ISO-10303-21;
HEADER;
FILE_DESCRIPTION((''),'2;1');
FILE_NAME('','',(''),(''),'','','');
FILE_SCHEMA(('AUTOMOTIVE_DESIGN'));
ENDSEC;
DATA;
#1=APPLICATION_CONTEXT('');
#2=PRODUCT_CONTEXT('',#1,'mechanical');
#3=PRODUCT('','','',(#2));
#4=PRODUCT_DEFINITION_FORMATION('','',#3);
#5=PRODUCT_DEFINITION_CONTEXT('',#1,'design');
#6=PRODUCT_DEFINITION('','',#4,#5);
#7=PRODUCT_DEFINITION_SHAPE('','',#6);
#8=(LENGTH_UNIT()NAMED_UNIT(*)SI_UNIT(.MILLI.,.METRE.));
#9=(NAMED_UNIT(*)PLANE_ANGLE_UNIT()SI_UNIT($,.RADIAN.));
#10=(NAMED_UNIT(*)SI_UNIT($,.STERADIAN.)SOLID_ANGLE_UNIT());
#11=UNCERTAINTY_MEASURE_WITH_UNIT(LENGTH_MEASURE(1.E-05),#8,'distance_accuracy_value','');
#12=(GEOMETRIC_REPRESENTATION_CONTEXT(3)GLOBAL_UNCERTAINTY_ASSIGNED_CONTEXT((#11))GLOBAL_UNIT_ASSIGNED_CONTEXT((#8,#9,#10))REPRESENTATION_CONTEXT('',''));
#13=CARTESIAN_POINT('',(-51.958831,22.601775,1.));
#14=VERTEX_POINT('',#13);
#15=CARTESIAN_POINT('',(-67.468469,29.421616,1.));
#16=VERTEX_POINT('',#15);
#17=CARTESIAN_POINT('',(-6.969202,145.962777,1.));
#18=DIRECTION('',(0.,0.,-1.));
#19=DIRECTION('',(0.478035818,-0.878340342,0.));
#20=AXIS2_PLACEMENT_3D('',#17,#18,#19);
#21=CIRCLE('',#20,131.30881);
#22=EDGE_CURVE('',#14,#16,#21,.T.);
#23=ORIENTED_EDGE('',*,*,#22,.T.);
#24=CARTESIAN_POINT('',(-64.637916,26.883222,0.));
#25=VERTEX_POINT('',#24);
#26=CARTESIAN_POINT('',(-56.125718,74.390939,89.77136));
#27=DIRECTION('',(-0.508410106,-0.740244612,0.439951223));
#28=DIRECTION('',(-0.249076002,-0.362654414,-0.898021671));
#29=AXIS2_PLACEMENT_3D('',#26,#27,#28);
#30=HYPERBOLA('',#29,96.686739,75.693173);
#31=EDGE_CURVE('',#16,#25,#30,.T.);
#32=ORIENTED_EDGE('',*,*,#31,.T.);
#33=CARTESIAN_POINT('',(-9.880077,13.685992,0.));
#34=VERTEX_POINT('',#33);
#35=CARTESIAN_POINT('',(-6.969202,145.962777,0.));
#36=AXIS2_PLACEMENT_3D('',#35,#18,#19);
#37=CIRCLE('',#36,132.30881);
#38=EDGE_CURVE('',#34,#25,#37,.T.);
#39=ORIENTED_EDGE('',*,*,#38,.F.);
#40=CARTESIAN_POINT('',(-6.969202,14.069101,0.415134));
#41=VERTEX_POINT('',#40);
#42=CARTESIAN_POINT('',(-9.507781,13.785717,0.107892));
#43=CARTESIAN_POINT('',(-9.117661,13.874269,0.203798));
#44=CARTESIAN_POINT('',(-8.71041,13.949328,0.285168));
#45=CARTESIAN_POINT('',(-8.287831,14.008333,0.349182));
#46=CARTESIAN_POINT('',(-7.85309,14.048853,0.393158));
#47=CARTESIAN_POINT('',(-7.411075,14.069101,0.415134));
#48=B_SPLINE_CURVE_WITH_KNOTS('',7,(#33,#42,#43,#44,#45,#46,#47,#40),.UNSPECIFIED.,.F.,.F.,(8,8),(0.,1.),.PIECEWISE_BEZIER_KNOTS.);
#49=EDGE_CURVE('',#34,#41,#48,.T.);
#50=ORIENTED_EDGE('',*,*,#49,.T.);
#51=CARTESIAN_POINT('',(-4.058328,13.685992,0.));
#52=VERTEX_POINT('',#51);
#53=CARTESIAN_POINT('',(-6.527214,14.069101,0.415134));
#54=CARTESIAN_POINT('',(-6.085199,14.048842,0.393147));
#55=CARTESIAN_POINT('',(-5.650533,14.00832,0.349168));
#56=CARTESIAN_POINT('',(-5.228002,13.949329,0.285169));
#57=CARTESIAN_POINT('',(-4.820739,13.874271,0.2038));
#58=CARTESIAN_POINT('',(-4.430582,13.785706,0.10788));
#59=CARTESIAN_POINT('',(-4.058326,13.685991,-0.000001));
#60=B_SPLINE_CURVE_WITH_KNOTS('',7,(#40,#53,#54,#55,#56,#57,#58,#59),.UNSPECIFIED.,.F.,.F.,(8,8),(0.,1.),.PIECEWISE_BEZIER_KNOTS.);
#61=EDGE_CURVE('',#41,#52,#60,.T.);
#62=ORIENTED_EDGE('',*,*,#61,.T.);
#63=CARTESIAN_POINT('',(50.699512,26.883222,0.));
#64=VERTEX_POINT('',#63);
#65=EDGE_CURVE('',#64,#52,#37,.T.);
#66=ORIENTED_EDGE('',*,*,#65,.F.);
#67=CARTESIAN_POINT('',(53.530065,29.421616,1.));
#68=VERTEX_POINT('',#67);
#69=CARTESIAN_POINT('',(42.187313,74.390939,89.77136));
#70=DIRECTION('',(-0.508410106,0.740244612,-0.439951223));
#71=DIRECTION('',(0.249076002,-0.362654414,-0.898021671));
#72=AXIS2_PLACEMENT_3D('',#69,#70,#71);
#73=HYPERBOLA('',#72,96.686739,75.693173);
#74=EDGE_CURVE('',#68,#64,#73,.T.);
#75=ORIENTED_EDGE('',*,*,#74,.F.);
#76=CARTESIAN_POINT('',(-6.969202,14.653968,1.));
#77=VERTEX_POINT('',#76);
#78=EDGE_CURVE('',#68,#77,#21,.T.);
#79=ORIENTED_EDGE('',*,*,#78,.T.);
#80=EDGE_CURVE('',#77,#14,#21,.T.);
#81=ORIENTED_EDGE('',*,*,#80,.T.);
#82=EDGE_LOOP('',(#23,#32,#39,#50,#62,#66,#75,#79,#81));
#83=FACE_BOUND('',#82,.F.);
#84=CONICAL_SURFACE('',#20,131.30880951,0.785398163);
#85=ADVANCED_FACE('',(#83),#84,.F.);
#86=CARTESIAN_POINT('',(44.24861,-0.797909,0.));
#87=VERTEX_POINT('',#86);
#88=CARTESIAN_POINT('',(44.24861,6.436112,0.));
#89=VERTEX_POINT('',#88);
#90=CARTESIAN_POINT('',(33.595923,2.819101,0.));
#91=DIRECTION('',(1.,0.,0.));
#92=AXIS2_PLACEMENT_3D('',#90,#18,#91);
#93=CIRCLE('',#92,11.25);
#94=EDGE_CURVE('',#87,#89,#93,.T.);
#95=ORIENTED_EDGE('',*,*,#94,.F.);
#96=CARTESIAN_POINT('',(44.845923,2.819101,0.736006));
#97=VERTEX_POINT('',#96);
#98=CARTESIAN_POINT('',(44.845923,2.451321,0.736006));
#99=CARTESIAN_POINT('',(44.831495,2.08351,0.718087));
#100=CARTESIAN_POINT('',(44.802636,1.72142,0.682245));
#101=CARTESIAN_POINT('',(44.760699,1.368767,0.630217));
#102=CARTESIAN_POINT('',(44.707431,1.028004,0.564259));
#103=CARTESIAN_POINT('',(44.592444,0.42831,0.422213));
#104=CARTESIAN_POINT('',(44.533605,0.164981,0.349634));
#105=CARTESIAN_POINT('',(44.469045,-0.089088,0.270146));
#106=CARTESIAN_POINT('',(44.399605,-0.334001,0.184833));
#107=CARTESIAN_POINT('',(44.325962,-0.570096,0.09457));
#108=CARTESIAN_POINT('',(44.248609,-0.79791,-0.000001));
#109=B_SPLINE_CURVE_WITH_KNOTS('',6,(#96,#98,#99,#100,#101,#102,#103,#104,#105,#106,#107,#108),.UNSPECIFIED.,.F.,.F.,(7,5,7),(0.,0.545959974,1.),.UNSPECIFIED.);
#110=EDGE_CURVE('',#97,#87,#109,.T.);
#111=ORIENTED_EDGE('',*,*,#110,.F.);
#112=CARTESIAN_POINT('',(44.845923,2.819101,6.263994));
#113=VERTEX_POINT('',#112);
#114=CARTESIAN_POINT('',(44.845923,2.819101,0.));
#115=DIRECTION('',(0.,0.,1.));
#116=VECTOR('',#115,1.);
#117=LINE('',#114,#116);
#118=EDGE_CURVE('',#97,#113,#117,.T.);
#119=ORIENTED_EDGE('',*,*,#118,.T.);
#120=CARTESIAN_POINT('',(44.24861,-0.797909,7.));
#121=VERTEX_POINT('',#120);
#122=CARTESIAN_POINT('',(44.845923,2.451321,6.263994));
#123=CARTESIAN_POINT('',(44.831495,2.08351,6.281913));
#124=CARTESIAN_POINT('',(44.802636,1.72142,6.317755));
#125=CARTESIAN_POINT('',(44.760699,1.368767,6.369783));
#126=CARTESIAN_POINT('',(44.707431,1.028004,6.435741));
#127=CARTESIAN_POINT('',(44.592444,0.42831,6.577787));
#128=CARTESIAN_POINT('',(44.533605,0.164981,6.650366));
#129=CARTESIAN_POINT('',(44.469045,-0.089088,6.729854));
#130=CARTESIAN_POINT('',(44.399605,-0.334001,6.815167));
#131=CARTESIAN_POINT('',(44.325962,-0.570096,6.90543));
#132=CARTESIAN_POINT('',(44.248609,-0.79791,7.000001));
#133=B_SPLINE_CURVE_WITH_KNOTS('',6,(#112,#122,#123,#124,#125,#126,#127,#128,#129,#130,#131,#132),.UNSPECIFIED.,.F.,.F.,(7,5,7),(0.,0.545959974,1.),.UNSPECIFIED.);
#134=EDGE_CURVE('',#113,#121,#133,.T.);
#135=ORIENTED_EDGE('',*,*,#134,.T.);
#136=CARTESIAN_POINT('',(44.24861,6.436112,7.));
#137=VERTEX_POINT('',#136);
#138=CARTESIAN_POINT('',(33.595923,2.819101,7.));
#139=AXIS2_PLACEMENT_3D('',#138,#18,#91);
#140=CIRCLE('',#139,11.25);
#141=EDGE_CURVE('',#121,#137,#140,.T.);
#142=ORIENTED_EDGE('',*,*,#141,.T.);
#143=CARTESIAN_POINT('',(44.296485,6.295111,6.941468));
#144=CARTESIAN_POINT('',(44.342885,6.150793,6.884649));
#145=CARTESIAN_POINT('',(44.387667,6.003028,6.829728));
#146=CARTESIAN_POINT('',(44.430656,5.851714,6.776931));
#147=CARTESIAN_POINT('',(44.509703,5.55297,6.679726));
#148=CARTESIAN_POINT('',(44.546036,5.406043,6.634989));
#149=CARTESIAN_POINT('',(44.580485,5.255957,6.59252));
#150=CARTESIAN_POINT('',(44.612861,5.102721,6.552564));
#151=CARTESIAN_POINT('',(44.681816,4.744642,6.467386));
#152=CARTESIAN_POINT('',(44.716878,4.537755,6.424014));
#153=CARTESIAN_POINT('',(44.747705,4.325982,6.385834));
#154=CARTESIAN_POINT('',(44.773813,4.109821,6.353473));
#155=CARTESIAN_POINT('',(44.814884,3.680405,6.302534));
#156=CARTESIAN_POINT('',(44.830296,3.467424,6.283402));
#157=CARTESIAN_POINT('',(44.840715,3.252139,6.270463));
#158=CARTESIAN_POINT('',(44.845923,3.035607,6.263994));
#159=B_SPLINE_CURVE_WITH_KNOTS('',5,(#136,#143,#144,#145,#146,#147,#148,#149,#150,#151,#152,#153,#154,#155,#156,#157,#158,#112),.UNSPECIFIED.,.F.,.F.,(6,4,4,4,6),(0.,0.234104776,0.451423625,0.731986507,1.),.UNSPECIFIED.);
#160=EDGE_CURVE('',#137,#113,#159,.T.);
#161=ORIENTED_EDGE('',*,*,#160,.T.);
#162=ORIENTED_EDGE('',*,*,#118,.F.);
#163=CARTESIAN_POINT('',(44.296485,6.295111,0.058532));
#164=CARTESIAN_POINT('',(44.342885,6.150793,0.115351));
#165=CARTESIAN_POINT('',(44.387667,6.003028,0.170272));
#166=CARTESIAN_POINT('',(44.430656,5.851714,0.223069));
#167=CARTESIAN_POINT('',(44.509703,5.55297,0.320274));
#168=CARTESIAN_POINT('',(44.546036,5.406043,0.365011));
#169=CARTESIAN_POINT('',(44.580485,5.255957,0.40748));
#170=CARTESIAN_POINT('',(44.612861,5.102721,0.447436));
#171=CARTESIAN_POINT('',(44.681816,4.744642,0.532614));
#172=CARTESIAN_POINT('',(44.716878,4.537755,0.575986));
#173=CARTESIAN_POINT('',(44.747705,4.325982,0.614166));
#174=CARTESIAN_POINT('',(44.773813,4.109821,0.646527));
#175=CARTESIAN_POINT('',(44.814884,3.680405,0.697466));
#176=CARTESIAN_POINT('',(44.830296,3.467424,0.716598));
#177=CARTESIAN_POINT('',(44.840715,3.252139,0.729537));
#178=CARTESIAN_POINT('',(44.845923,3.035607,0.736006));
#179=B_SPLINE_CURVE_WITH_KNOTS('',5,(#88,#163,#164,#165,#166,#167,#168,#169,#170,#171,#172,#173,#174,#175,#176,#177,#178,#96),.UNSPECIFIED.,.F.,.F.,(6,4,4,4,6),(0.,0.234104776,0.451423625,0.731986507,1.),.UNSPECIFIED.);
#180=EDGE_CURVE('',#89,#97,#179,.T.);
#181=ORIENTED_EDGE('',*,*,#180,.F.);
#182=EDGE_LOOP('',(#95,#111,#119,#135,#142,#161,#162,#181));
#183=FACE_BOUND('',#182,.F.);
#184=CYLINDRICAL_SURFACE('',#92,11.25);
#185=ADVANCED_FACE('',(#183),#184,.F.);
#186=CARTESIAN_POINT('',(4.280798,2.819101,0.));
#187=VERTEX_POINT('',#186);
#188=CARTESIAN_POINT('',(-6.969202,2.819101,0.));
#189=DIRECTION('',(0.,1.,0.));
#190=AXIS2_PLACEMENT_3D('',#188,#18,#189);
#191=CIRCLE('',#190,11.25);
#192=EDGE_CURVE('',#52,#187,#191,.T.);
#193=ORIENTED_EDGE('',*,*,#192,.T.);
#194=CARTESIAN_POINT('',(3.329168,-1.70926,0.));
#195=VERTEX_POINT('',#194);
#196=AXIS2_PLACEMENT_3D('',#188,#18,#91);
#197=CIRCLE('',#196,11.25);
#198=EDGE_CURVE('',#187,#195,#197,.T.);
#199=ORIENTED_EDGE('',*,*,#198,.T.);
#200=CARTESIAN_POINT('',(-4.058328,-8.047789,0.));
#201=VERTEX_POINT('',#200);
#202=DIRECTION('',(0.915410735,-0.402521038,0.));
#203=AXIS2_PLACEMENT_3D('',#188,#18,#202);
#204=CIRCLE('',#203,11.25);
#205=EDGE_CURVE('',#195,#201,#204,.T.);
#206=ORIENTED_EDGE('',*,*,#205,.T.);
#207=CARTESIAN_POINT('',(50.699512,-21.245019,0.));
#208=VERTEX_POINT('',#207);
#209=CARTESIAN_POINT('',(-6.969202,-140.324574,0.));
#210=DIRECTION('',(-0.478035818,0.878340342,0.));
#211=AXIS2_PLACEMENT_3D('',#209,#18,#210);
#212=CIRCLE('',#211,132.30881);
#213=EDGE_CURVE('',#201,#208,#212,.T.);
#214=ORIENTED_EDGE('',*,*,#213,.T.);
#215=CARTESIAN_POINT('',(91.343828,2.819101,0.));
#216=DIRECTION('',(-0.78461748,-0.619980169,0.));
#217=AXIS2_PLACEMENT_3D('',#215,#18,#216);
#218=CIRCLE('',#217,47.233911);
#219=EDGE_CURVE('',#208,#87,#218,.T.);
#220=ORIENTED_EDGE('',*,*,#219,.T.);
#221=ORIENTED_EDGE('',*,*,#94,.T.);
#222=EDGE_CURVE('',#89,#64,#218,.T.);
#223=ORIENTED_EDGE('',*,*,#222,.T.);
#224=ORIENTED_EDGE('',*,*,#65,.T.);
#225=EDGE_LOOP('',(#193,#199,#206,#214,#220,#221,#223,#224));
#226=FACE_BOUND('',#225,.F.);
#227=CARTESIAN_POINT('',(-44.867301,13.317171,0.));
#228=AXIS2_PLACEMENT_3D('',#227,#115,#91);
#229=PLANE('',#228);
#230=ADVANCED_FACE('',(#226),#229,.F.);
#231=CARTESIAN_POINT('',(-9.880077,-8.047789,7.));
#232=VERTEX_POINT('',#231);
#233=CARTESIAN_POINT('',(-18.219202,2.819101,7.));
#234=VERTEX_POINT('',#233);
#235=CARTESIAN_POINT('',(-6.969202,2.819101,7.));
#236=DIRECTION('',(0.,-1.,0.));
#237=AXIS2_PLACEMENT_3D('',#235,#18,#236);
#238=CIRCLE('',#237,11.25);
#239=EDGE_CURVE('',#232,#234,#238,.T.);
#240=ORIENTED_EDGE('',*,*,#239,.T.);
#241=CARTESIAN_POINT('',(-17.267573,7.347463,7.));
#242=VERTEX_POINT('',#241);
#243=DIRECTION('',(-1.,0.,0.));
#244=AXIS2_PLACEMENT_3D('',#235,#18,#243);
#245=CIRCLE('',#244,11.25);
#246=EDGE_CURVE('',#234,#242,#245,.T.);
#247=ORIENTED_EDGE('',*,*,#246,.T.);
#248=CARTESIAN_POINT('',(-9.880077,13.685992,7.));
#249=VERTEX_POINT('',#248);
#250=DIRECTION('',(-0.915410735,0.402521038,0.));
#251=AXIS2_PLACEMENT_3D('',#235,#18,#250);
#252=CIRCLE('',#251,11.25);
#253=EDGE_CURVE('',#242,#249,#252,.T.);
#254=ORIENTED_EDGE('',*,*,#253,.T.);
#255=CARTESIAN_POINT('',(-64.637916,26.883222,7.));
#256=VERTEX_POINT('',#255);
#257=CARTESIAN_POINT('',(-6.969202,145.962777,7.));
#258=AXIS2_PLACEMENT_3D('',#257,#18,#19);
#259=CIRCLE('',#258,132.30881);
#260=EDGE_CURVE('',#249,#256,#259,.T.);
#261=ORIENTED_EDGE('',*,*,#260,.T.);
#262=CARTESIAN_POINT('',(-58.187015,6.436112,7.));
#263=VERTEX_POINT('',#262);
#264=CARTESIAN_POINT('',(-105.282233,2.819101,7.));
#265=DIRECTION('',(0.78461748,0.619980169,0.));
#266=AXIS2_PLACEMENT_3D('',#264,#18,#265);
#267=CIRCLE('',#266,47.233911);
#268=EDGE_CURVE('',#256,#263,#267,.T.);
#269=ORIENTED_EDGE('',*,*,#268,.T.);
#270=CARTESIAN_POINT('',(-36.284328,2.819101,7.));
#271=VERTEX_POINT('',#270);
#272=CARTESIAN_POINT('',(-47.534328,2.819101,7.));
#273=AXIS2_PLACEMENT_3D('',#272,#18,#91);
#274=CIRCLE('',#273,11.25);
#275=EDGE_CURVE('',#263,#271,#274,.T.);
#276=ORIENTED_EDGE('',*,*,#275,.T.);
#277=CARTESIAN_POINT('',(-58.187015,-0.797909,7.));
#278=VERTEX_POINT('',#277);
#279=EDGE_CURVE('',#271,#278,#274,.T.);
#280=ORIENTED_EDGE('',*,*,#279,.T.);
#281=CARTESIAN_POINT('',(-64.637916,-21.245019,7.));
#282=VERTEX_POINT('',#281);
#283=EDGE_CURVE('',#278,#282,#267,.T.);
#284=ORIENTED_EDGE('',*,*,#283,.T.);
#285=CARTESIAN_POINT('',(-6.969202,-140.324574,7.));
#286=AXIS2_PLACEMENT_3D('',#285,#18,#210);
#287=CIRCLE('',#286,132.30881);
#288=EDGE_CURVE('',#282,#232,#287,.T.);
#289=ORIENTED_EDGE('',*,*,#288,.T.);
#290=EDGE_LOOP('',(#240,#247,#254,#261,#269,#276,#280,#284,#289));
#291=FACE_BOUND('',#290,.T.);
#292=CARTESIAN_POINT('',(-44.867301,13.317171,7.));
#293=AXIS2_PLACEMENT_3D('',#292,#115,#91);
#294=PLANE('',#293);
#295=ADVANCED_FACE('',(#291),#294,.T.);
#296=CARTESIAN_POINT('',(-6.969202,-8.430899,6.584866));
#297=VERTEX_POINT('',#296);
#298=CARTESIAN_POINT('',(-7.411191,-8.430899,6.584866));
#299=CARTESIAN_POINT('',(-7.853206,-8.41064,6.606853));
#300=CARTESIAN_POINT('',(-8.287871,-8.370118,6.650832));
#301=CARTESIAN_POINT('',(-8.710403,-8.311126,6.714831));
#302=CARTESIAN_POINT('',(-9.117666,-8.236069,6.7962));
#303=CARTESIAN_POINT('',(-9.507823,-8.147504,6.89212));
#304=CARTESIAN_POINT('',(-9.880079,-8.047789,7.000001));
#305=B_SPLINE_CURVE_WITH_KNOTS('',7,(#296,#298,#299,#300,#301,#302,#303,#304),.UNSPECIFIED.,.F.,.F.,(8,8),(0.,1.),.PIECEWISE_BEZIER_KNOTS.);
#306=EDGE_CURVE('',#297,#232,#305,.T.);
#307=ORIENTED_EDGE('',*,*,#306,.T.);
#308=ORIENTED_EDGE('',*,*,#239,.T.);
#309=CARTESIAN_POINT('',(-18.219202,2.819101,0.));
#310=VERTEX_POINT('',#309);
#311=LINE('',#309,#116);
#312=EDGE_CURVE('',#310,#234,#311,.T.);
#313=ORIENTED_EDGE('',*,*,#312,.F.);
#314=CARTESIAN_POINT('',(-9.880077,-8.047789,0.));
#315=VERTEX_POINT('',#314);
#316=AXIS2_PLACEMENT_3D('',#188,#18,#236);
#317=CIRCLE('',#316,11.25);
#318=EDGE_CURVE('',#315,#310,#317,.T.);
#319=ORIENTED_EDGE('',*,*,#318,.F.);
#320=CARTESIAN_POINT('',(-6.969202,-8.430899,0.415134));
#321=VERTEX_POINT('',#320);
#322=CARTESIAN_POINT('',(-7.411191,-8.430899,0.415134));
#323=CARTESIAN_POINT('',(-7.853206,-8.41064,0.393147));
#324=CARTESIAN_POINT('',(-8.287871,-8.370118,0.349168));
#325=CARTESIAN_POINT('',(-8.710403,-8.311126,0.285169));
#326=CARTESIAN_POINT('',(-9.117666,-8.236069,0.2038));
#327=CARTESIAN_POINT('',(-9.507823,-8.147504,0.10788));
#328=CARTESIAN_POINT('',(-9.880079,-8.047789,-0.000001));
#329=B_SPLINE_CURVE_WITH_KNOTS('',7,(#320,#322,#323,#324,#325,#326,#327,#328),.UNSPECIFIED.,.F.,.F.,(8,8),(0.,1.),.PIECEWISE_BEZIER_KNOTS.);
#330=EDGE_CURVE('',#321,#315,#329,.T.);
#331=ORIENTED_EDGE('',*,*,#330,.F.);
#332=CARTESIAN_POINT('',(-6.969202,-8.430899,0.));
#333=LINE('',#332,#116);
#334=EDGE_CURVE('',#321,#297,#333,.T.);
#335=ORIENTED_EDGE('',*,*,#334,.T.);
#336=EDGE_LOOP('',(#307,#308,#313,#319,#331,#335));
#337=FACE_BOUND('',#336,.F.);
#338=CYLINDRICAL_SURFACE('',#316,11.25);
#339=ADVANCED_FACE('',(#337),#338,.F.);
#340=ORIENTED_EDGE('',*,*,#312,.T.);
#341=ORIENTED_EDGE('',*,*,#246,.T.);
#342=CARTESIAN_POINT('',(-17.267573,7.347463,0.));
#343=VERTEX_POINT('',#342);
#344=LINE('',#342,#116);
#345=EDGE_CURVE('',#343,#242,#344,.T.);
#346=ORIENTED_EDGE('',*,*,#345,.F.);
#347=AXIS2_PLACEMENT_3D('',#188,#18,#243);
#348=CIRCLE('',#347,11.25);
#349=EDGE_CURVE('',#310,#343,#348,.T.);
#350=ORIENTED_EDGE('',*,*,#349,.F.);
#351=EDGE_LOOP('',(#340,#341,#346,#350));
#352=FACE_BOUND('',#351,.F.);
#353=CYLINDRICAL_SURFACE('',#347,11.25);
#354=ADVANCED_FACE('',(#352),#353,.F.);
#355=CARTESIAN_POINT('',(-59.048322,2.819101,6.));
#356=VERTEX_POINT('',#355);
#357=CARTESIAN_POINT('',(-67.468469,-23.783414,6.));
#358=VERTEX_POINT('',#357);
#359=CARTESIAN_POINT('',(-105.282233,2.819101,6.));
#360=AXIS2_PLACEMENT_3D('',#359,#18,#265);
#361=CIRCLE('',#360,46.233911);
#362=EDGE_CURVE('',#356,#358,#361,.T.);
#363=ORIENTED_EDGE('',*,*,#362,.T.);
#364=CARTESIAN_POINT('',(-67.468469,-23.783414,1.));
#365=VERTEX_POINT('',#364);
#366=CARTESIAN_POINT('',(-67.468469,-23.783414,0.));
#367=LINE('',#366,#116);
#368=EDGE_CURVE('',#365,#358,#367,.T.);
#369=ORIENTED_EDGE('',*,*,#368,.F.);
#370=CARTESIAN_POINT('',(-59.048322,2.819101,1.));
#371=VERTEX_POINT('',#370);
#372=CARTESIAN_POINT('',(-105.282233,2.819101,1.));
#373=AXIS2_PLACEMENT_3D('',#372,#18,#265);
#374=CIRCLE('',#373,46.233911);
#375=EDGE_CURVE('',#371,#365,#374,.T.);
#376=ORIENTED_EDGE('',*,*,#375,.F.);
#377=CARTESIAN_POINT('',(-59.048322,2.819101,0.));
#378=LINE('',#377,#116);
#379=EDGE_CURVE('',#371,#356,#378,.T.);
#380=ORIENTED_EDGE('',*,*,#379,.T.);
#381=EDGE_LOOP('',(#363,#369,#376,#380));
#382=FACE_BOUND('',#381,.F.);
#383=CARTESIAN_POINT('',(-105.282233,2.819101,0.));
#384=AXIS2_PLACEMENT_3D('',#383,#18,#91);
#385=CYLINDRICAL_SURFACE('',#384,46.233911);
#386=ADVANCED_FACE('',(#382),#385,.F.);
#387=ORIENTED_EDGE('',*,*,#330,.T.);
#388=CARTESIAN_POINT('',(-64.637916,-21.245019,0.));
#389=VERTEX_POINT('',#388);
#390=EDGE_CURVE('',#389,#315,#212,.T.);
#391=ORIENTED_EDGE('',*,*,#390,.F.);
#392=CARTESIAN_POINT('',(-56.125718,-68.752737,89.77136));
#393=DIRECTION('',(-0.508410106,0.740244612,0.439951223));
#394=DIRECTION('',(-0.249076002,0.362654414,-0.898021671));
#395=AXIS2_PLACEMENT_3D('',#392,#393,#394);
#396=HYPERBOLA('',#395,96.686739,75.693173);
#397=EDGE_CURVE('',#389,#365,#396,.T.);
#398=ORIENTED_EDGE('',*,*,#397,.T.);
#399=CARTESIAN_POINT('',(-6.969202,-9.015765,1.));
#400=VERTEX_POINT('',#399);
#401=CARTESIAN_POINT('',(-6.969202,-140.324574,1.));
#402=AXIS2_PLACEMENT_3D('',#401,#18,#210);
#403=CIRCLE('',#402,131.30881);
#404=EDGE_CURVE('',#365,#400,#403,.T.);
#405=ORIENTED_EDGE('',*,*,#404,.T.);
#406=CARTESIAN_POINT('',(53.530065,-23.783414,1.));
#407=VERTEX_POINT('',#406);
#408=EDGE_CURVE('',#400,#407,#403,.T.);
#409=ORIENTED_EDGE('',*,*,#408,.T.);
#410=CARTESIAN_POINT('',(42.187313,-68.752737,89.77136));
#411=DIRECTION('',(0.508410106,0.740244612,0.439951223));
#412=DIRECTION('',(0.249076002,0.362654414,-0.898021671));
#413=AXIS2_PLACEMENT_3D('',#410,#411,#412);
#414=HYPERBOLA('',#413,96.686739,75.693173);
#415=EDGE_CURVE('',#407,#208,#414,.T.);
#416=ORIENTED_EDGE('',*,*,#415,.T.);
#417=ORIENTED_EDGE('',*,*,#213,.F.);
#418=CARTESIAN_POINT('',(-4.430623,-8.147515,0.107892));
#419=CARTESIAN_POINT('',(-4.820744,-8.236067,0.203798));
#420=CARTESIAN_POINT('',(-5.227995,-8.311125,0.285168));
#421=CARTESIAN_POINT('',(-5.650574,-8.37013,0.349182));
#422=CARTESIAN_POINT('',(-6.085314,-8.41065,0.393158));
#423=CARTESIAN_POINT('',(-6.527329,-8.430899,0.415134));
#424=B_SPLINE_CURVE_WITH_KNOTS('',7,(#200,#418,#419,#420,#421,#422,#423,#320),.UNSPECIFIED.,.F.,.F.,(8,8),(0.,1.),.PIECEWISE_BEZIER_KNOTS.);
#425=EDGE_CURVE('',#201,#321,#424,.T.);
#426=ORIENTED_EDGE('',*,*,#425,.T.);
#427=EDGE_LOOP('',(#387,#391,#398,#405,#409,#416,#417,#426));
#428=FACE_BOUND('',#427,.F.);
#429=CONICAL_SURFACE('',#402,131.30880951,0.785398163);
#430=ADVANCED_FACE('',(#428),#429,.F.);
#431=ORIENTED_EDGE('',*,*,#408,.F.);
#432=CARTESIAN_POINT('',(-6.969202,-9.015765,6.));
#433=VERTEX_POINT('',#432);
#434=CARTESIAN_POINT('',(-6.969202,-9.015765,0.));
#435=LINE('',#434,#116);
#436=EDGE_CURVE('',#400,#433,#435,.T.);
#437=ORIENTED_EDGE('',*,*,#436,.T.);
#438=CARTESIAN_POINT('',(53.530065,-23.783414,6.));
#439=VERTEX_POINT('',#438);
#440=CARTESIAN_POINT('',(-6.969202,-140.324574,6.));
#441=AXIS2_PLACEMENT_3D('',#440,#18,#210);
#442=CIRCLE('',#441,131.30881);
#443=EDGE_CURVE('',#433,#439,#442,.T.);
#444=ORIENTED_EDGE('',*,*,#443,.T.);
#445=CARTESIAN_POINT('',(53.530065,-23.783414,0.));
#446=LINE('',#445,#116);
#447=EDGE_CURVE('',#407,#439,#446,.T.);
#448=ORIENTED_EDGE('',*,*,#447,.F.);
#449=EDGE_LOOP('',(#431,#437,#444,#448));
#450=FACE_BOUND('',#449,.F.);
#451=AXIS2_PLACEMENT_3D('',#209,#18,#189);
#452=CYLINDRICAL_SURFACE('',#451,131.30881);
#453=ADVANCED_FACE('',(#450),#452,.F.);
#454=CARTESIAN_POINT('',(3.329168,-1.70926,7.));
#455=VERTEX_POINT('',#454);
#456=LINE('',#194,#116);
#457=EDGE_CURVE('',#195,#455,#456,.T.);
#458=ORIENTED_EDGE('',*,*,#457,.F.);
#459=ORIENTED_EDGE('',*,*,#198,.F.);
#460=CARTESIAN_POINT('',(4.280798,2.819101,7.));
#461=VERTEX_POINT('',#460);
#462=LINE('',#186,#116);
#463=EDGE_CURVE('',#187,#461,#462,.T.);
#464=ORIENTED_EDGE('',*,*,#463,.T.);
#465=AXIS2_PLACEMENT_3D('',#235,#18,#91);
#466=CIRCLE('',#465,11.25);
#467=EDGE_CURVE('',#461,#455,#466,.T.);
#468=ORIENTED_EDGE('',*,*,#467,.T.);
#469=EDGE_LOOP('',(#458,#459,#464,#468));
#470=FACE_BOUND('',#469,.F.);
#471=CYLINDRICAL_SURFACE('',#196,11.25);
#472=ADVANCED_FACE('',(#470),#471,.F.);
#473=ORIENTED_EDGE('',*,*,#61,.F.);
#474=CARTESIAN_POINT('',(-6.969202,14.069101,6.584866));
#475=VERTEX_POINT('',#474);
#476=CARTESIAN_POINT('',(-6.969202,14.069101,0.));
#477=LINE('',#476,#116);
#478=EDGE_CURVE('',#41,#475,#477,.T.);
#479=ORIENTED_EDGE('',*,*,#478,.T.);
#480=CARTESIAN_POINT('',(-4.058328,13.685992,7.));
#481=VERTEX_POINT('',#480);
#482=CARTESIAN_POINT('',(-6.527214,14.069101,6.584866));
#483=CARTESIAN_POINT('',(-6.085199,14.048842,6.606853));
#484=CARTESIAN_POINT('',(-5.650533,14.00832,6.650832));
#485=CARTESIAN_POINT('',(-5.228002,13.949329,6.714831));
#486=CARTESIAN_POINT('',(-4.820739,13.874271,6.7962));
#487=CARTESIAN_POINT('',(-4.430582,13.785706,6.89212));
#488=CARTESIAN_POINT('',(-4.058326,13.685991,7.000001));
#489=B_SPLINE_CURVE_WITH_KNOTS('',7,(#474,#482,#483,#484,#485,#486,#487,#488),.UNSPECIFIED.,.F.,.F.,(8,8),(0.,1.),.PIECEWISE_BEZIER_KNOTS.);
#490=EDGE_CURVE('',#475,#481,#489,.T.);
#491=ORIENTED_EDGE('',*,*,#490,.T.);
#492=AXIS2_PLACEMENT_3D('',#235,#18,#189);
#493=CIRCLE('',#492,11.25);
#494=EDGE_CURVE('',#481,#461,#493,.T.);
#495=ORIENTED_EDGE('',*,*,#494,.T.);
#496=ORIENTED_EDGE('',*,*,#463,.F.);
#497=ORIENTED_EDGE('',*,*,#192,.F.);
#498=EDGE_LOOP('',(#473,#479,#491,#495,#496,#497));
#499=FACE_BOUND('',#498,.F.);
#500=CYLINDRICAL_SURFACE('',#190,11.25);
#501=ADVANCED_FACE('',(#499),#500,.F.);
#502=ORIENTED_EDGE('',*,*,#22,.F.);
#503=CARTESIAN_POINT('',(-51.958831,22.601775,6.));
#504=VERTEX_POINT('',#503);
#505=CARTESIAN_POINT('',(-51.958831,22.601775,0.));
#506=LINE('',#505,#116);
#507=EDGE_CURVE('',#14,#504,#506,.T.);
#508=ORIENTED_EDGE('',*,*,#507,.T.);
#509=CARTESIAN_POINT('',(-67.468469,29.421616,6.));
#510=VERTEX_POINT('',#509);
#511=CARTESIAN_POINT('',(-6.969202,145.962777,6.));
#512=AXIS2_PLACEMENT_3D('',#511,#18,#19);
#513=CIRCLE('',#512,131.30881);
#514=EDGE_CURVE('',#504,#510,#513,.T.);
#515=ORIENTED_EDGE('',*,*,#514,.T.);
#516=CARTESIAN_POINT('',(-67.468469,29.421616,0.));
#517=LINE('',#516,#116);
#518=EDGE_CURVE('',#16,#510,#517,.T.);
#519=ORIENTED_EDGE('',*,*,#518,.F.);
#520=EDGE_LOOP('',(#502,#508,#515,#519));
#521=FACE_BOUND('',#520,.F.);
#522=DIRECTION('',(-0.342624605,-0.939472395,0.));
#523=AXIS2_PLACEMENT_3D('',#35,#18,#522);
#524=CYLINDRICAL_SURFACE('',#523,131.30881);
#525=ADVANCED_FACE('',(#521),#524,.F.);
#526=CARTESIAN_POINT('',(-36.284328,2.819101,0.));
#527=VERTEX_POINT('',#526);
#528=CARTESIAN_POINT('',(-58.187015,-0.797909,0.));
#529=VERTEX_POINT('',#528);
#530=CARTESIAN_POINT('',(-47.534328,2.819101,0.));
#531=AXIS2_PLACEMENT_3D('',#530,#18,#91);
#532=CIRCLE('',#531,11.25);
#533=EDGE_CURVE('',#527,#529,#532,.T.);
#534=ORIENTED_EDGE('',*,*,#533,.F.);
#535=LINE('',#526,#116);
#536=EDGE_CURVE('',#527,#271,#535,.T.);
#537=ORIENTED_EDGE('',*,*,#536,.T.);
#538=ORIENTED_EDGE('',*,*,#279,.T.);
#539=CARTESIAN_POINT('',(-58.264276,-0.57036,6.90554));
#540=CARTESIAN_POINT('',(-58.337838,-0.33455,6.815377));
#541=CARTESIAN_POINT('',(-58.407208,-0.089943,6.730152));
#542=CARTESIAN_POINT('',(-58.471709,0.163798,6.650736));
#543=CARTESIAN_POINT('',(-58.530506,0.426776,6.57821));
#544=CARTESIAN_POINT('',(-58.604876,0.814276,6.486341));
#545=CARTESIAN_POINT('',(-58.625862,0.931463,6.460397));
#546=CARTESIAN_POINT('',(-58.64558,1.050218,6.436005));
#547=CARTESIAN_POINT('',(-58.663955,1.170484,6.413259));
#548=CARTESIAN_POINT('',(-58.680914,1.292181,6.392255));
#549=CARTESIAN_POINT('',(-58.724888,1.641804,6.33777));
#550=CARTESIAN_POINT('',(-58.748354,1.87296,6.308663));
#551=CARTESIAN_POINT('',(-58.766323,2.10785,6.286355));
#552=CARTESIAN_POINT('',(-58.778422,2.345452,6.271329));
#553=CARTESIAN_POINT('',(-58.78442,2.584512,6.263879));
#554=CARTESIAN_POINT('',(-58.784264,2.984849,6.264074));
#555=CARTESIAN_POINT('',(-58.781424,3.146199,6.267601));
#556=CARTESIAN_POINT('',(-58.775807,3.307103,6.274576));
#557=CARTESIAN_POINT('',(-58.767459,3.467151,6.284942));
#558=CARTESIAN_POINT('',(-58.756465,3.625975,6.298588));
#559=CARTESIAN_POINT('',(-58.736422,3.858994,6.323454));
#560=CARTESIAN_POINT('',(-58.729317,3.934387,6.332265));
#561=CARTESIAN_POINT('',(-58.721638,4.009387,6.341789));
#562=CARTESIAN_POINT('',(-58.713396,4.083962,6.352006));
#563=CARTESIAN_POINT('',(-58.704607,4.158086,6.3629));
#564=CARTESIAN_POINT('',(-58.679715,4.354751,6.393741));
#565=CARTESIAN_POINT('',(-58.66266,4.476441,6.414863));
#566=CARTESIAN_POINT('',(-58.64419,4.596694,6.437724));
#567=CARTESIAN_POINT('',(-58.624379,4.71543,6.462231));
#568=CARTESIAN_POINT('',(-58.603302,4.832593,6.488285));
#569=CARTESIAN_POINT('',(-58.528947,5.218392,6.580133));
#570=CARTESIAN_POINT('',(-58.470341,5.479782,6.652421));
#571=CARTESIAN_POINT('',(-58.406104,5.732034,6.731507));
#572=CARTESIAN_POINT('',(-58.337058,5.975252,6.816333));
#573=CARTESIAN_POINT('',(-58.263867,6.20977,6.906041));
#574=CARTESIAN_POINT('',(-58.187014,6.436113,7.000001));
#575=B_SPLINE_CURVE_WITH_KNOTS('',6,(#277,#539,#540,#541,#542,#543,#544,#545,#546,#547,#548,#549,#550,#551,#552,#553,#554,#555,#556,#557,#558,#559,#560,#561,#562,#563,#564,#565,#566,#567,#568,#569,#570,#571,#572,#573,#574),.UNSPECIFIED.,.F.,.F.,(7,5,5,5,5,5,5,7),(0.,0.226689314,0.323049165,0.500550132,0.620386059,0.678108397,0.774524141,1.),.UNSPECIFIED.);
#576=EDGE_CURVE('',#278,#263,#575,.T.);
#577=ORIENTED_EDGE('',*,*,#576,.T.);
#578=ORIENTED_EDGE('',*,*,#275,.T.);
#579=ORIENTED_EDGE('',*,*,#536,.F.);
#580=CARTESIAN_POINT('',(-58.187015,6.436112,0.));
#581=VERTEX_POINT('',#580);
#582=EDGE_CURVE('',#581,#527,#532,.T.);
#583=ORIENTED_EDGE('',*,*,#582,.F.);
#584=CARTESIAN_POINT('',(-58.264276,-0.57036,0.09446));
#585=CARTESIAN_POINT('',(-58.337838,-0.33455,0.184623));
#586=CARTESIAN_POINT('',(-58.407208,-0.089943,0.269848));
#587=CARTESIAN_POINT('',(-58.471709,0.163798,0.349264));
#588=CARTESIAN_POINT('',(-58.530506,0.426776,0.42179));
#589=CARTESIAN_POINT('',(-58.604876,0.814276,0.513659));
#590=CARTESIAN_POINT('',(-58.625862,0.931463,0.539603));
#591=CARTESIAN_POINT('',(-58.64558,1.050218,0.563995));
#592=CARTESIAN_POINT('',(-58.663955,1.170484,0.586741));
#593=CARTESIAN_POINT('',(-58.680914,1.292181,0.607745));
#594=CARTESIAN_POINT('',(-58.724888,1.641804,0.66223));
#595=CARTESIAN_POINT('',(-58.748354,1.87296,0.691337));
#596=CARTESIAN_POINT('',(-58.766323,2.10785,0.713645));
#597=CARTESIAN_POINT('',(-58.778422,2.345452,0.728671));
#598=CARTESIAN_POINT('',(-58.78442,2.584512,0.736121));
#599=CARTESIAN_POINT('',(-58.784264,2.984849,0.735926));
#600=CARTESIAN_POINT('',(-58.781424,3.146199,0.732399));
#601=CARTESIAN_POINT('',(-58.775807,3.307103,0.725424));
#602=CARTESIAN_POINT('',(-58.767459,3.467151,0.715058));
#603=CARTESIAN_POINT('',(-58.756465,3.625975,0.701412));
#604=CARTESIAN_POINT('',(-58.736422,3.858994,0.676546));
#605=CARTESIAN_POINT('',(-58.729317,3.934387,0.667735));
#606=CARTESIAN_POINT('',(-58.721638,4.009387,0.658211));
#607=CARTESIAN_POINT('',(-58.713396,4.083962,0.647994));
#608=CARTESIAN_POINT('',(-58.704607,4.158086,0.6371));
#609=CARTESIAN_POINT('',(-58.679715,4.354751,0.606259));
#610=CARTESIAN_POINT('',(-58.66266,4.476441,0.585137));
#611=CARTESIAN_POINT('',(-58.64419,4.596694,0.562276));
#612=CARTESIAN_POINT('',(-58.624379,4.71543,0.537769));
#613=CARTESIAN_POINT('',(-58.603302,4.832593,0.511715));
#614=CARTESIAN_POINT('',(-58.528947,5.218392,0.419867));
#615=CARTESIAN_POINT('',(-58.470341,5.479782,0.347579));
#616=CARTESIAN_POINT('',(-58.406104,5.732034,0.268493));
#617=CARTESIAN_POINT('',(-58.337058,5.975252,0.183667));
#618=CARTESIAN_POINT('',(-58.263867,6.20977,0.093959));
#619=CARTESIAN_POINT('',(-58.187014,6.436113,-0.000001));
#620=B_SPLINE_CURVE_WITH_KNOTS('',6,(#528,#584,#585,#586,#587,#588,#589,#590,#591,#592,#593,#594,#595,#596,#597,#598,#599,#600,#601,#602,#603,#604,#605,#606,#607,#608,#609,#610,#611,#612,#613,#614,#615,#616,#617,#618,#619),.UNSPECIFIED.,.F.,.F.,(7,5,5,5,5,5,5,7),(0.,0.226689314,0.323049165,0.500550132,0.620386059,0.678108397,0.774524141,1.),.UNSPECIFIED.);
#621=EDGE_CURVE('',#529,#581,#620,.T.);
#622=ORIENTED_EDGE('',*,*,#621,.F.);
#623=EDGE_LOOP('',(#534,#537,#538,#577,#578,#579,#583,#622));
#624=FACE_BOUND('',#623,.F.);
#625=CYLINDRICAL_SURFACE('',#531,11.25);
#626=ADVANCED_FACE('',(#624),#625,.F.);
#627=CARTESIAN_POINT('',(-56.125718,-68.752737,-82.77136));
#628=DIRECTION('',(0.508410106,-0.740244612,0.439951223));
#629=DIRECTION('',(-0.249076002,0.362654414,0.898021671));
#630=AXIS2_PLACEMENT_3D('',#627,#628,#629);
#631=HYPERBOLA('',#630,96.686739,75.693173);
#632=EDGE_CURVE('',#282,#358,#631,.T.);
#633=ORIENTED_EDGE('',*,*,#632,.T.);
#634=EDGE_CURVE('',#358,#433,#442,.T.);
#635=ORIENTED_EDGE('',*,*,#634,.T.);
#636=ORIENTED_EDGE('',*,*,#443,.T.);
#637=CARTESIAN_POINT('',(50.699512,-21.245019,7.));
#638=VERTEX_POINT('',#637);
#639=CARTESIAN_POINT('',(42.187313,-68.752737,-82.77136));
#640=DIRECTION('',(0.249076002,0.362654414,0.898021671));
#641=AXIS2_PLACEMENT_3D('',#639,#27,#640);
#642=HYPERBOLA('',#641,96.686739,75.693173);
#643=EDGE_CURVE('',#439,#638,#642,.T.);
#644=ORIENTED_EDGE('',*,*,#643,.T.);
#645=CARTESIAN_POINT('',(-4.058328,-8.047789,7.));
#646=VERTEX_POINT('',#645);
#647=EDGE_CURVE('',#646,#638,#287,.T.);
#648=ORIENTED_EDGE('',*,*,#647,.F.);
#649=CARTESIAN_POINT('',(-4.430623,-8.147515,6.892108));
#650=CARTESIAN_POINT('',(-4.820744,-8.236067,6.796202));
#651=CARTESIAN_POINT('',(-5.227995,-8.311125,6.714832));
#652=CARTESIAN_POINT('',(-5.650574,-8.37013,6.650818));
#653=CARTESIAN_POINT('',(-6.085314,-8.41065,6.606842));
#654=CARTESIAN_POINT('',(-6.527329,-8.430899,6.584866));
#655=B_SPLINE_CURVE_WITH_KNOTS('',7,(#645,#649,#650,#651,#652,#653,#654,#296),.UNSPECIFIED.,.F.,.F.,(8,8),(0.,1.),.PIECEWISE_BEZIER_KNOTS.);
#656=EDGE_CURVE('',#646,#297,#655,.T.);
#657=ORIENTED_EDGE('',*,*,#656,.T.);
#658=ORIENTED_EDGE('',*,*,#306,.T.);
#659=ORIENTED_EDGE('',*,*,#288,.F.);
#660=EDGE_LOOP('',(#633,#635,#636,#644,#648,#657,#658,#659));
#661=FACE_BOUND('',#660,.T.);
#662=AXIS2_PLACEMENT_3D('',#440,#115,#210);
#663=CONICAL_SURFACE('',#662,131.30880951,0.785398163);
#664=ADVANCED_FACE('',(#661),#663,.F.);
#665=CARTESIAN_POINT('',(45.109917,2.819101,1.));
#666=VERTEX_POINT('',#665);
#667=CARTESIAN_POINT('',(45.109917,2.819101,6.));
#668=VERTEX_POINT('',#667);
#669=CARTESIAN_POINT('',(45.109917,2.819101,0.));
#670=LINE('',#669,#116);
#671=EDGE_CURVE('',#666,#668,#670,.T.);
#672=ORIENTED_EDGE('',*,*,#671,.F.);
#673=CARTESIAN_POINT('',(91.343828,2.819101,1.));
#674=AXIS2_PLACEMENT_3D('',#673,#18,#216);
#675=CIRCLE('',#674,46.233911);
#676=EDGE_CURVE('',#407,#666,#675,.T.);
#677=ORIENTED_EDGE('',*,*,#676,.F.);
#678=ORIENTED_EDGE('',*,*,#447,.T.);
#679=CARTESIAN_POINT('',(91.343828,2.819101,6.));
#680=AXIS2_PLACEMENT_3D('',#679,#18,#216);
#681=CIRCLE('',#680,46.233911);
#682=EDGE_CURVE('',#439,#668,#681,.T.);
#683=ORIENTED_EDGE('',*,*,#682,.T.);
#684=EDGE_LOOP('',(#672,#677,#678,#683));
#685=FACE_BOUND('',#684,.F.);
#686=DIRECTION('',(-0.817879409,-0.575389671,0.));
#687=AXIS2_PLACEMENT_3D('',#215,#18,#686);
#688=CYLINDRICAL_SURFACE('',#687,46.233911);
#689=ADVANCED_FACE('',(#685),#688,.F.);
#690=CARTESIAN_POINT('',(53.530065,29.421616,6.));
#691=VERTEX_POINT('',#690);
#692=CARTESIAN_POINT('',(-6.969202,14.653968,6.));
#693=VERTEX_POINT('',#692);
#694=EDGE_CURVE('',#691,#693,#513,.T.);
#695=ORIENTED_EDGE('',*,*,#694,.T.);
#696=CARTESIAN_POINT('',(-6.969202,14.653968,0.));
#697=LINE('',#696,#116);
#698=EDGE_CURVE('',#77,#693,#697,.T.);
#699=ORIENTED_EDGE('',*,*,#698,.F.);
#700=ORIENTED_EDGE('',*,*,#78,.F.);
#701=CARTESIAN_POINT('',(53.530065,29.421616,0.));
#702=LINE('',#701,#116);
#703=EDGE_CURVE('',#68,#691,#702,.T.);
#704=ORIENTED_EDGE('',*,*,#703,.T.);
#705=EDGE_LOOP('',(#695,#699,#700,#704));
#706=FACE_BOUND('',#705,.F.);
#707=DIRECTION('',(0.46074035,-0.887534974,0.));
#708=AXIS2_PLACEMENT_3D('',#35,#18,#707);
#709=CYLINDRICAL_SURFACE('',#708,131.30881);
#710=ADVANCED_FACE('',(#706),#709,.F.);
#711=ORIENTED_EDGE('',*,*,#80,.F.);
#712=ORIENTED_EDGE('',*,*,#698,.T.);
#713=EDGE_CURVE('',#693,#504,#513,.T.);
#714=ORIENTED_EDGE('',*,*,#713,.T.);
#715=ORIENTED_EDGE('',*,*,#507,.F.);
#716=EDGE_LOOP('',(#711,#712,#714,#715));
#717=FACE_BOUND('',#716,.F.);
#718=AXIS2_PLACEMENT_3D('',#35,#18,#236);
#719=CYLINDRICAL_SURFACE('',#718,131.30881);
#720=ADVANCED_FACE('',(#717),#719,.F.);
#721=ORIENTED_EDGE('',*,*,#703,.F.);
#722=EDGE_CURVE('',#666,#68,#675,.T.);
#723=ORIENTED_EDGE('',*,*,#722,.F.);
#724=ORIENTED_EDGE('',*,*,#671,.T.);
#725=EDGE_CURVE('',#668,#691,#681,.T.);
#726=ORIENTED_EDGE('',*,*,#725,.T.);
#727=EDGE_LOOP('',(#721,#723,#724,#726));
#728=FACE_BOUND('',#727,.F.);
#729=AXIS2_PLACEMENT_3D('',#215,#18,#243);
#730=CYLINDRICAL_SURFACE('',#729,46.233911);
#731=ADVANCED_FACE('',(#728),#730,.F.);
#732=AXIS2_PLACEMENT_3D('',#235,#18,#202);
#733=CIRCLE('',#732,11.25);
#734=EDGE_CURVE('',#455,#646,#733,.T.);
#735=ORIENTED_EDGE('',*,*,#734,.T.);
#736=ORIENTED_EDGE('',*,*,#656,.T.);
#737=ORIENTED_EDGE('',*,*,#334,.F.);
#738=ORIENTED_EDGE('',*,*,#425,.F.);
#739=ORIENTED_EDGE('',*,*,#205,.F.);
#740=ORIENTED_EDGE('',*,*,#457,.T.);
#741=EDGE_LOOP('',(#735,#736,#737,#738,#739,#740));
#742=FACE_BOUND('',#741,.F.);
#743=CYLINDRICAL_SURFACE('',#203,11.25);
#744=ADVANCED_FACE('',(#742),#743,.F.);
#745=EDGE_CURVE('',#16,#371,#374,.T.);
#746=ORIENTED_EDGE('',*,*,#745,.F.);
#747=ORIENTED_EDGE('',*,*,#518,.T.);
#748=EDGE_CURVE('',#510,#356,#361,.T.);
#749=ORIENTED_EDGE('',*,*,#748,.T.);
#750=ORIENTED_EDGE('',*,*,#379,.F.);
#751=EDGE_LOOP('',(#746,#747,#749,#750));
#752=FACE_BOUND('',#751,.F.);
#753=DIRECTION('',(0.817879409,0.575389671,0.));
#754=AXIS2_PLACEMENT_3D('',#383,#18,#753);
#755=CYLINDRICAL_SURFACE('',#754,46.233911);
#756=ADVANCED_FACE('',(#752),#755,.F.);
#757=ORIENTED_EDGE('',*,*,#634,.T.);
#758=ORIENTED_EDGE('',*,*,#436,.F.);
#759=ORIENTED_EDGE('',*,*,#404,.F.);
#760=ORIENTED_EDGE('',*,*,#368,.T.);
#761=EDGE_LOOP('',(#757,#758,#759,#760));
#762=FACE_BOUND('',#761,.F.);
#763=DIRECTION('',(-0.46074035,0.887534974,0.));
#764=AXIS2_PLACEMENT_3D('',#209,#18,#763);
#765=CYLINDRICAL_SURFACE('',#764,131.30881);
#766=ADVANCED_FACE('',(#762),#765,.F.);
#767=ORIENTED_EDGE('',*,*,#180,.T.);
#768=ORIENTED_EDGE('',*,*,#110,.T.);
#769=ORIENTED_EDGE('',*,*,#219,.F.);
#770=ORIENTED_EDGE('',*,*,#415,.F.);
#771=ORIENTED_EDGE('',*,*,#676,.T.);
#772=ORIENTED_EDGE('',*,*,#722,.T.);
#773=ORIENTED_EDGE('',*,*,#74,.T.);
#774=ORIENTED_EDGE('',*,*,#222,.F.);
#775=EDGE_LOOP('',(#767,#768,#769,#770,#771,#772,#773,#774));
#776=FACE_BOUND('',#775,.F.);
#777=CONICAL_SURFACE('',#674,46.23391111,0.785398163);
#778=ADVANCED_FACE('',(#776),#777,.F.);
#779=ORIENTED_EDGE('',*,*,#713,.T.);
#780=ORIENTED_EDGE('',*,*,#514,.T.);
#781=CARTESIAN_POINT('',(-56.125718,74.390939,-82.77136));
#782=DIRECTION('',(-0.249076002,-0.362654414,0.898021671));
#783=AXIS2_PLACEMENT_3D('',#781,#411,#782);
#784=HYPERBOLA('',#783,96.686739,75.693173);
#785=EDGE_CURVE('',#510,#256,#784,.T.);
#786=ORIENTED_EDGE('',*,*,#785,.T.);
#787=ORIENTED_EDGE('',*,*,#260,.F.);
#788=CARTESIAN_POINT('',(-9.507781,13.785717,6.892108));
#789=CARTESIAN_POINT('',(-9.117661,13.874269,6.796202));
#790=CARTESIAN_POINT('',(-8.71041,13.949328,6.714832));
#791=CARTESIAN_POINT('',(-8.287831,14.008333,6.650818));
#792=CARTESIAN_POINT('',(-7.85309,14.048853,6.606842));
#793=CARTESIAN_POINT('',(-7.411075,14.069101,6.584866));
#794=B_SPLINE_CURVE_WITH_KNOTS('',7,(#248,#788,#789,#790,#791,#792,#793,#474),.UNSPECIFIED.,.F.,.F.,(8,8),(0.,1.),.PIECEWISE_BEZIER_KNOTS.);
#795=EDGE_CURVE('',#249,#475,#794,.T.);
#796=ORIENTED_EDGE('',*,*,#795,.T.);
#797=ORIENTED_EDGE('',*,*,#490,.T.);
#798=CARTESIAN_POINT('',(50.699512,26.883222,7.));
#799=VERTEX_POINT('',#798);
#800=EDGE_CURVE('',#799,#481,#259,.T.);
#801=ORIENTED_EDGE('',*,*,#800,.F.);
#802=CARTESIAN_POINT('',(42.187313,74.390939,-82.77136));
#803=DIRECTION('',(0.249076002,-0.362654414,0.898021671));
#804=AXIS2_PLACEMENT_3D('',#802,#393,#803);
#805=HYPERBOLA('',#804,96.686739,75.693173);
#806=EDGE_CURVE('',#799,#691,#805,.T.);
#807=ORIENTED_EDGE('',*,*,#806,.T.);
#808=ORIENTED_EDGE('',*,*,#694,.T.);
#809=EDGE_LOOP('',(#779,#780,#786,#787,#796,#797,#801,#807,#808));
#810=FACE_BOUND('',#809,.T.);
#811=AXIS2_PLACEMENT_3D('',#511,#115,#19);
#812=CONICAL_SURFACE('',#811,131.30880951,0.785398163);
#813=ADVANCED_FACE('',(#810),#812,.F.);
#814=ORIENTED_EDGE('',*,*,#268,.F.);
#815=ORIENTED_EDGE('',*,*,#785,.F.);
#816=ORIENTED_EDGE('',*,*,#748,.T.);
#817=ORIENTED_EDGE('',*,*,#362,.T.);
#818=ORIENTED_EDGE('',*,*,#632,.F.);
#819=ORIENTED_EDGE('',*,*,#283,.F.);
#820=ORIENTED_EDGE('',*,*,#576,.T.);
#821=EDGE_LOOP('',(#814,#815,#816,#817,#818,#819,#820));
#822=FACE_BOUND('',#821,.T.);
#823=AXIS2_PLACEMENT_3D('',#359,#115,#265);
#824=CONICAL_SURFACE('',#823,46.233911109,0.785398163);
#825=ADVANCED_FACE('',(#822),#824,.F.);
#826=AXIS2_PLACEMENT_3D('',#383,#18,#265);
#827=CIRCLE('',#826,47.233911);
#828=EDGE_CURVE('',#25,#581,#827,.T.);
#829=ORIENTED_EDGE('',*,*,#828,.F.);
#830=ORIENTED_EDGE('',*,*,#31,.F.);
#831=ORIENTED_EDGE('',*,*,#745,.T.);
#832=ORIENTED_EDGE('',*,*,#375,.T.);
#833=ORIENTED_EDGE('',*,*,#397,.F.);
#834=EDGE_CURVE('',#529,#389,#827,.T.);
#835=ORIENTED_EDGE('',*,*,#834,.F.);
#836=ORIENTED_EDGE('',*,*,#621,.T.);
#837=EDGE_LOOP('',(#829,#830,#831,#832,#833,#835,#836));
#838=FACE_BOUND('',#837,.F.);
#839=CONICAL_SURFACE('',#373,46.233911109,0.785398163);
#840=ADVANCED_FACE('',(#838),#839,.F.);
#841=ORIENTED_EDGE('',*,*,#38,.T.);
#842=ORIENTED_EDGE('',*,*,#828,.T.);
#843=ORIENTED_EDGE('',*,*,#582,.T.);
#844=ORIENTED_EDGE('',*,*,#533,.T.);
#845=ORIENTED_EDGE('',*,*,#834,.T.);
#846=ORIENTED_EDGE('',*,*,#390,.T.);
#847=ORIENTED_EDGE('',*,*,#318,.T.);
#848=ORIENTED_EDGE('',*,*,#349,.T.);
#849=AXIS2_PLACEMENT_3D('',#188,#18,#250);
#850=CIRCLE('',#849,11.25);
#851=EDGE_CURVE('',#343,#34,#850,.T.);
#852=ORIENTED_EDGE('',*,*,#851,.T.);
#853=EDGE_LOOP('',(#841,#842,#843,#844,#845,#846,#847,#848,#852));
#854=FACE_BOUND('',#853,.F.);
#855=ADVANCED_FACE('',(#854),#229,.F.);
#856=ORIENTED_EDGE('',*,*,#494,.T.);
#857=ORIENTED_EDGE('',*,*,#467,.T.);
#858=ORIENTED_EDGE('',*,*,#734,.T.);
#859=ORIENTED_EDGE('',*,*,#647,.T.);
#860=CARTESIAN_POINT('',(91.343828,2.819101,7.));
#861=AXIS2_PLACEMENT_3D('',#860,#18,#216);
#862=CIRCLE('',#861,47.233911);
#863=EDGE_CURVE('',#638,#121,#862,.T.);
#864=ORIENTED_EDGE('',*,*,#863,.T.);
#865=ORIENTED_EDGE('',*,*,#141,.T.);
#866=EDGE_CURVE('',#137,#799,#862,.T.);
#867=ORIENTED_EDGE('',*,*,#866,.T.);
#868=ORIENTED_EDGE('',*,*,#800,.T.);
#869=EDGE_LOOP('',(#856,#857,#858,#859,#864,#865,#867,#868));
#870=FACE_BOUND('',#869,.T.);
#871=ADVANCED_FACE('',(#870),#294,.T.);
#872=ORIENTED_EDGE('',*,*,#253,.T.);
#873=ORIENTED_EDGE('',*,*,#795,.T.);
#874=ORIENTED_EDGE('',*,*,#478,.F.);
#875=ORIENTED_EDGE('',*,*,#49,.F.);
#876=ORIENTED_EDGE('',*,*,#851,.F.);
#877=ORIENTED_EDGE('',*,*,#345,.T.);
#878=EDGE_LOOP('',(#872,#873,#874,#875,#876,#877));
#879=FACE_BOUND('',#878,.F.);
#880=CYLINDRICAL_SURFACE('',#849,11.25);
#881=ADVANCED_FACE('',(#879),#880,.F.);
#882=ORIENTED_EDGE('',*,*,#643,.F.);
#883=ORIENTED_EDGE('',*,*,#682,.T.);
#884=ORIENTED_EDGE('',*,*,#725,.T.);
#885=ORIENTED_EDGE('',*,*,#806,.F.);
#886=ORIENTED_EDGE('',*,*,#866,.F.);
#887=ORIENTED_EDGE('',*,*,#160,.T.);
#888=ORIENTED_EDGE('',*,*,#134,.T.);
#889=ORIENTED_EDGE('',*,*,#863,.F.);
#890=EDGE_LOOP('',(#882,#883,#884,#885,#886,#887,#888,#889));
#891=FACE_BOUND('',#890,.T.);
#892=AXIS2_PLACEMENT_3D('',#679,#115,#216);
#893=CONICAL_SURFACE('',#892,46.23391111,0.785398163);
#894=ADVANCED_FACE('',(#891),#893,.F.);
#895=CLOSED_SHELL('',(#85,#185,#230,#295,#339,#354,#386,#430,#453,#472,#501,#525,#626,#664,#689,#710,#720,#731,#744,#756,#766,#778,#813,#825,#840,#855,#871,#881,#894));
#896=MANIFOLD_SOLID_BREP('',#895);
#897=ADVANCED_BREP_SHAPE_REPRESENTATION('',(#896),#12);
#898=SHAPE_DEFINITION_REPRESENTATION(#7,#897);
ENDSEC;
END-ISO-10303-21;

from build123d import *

# Parameters (mm, degrees)
F1_DEPTH     = 7
F2_T2_ANGLE  = 57.1143931605
F2_T4_ANGLE  = 57.1143931605
F2_T6_ANGLE  = 76.6293726343
F2_T8_ANGLE  = 76.6293726343
F2_T10_ANGLE = 57.1143931605
F2_T12_ANGLE = 76.6293726343
F2_T14_ANGLE = 76.6293726343
F2_T16_ANGLE = 57.1143931605


# Not quite as in the source:
# - a fillet or chamfer that OpenCascade refuses, or shapes differently, is made with other operations: its cross-section is extruded or revolved along the edge and cut away or added


with BuildPart() as f1:
    # F0 (on Top) → F1 (new body)
    with BuildSketch(Plane.XY):
        with BuildLine():
            ThreePointArc((-51.9588312409, 22.6017753357), (-59.8237606638, 25.7612832302), (-67.4684691244, 29.4216162089))
            ThreePointArc((-67.4684691244, 29.4216162089), (-61.2035945552, 16.7707381256), (-59.0483218899, 2.8191013262))
            Line((-59.0483218899, 2.8191013262), (-58.7843277942, 2.8191013262))
            ThreePointArc((-58.7843277942, 2.8191013262), (-47.5343277942, 14.0691013262), (-36.2843277942, 2.8191013262))
            Line((-36.2843277942, 2.8191013262), (-18.2192023098, 2.8191013262))
            ThreePointArc((-18.2192023098, 2.8191013262), (-17.978724805, 5.1327379505), (-17.267573078, 7.3474630081))
            Line((-17.267573078, 7.3474630081), (-51.9588312409, 22.6017753357))
        make_face()
        with BuildLine():
            ThreePointArc((-6.9692023098, 14.6539675384), (-29.8123323501, 16.6561845448), (-51.9588312409, 22.6017753357))
            Line((-51.9588312409, 22.6017753357), (-17.267573078, 7.3474630081))
            ThreePointArc((-17.267573078, 7.3474630081), (-13.1181221775, 12.2399974863), (-6.9692023098, 14.0691013262))
            Line((-6.9692023098, 14.0691013262), (-6.9692023098, 14.6539675384))
        make_face()
        with BuildLine():
            Line((-58.7843277942, 2.8191013262), (-59.0483218899, 2.8191013262))
            ThreePointArc((-59.0483218899, 2.8191013262), (-61.2035945552, -11.1325354733), (-67.4684691244, -23.7834135565))
            ThreePointArc((-67.4684691244, -23.7834135565), (-38.1069797367, -12.7610910953), (-6.9692023098, -9.0157648861))
            Line((-6.9692023098, -9.0157648861), (-6.9692023098, -8.4308986738))
            ThreePointArc((-6.9692023098, -8.4308986738), (-14.9241535982, -5.1358499622), (-18.2192023098, 2.8191013262))
            Line((-18.2192023098, 2.8191013262), (-36.2843277942, 2.8191013262))
            ThreePointArc((-36.2843277942, 2.8191013262), (-47.5343277942, -8.4308986738), (-58.7843277942, 2.8191013262))
        make_face()
        with BuildLine():
            ThreePointArc((45.1099172702, 2.8191013262), (47.2651899355, 16.7707381256), (53.5300645047, 29.4216162089))
            ThreePointArc((53.5300645047, 29.4216162089), (24.168575117, 18.3992937476), (-6.9692023098, 14.6539675384))
            Line((-6.9692023098, 14.6539675384), (-6.9692023098, 14.0691013262))
            ThreePointArc((-6.9692023098, 14.0691013262), (0.9857489785, 10.7740526145), (4.2807976902, 2.8191013262))
            Line((4.2807976902, 2.8191013262), (22.3459231745, 2.8191013262))
            ThreePointArc((22.3459231745, 2.8191013262), (33.5959231745, 14.0691013262), (44.8459231745, 2.8191013262))
            Line((44.8459231745, 2.8191013262), (45.1099172702, 2.8191013262))
        make_face()
        with BuildLine():
            ThreePointArc((53.5300645047, -23.7834135565), (47.2651899355, -11.1325354733), (45.1099172702, 2.8191013262))
            Line((45.1099172702, 2.8191013262), (44.8459231745, 2.8191013262))
            ThreePointArc((44.8459231745, 2.8191013262), (33.5959231745, -8.4308986738), (22.3459231745, 2.8191013262))
            Line((22.3459231745, 2.8191013262), (4.2807976902, 2.8191013262))
            ThreePointArc((4.2807976902, 2.8191013262), (4.0403201853, 0.5054647019), (3.3291684583, -1.7092603557))
            Line((3.3291684583, -1.7092603557), (38.0204266212, -16.9635726834))
            ThreePointArc((38.0204266212, -16.9635726834), (45.8853560441, -20.1230805779), (53.5300645047, -23.7834135565))
        make_face()
        with BuildLine():
            Line((-6.9692023098, -8.4308986738), (-6.9692023098, -9.0157648861))
            ThreePointArc((-6.9692023098, -9.0157648861), (15.8739277304, -11.0179818925), (38.0204266212, -16.9635726834))
            Line((38.0204266212, -16.9635726834), (3.3291684583, -1.7092603557))
            ThreePointArc((3.3291684583, -1.7092603557), (-0.8202824422, -6.601794834), (-6.9692023098, -8.4308986738))
        make_face()
    extrude(amount=F1_DEPTH)

    # F2: chamfer of 1 on 8 edges, made by hand

    # F2_s1 → F2_t2 (revolve, cut)
    with BuildSketch(Plane(origin=(-64.2958342843, -34.9929409524, 0), x_dir=(0, 0, 1), z_dir=(-0.8783403422, -0.4780358179, 0))):
        Polygon((6, 11.3876031391), (7, 12.3876031391), (7, 11.3876031391), align=None)
    revolve(axis=Axis((-6.9692023098, -140.3245743959, 7), (0, 0, -1)), revolution_arc=F2_T2_ANGLE, mode=Mode.SUBTRACT)

    # F2_s3 → F2_t4 (revolve, cut)
    with BuildSketch(Plane(origin=(55.9099674663, 30.4289416566, 0), x_dir=(0, 0, 1), z_dir=(0.8783403422, 0.4780358179, 0))):
        Polygon((6, -0.2277143611), (7, 0.7722856389), (7, -0.2277143611), align=None)
    revolve(axis=Axis((-6.9692023098, 145.9627770483, 7), (0, 0, -1)), revolution_arc=F2_T4_ANGLE, mode=Mode.SUBTRACT)

    # F2_s5 → F2_t6 (revolve, cut)
    with BuildSketch(Plane(origin=(-41.8392456248, 52.9497637497, 0), x_dir=(0, 0, 1), z_dir=(-0.6199801689, 0.7846174801, 0))):
        Polygon((6, -34.6245823345), (7, -33.6245823345), (7, -34.6245823345), align=None)
    revolve(axis=Axis((-105.2822329994, 2.8191013262, 7), (0, 0, -1)), revolution_arc=F2_T6_ANGLE, mode=Mode.SUBTRACT)

    # F2_s7 → F2_t8 (revolve, cut)
    with BuildSketch(Plane(origin=(-41.8392456248, 52.9497637497, 0), x_dir=(0, 0, 1), z_dir=(-0.6199801689, 0.7846174801, 0))):
        Polygon((1, -34.6245823345), (0, -33.6245823345), (0, -34.6245823345), align=None)
    revolve(axis=Axis((-105.2822329994, 2.8191013262, 0), (0, 0, -1)), revolution_arc=F2_T8_ANGLE, mode=Mode.SUBTRACT)

    # F2_s9 → F2_t10 (revolve, cut)
    with BuildSketch(Plane(origin=(55.9099674663, 30.4289416566, 0), x_dir=(0, 0, 1), z_dir=(0.8783403422, 0.4780358179, 0))):
        Polygon((1, -0.2277143611), (0, 0.7722856389), (0, -0.2277143611), align=None)
    revolve(axis=Axis((-6.9692023098, 145.9627770483, 0), (0, 0, -1)), revolution_arc=F2_T10_ANGLE, mode=Mode.SUBTRACT)

    # F2_s11 → F2_t12 (revolve, cut)
    with BuildSketch(Plane(origin=(33.7389773041, -42.6984485674, 0), x_dir=(0, 0, 1), z_dir=(0.6199801689, -0.7846174801, 0))):
        Polygon((1, -27.1838402573), (0, -26.1838402573), (0, -27.1838402573), align=None)
    revolve(axis=Axis((91.3438283797, 2.8191013262, 0), (0, 0, -1)), revolution_arc=F2_T12_ANGLE, mode=Mode.SUBTRACT)

    # F2_s13 → F2_t14 (revolve, cut)
    with BuildSketch(Plane(origin=(33.7389773041, -42.6984485674, 0), x_dir=(0, 0, 1), z_dir=(0.6199801689, -0.7846174801, 0))):
        Polygon((6, -27.1838402573), (7, -26.1838402573), (7, -27.1838402573), align=None)
    revolve(axis=Axis((91.3438283797, 2.8191013262, 7), (0, 0, -1)), revolution_arc=F2_T14_ANGLE, mode=Mode.SUBTRACT)

    # F2_s15 → F2_t16 (revolve, cut)
    with BuildSketch(Plane(origin=(-64.2958342843, -34.9929409524, 0), x_dir=(0, 0, 1), z_dir=(-0.8783403422, -0.4780358179, 0))):
        Polygon((1, 11.3876031391), (0, 12.3876031391), (0, 11.3876031391), align=None)
    revolve(axis=Axis((-6.9692023098, -140.3245743959, 0), (0, 0, -1)), revolution_arc=F2_T16_ANGLE, mode=Mode.SUBTRACT)


solid = f1.part
